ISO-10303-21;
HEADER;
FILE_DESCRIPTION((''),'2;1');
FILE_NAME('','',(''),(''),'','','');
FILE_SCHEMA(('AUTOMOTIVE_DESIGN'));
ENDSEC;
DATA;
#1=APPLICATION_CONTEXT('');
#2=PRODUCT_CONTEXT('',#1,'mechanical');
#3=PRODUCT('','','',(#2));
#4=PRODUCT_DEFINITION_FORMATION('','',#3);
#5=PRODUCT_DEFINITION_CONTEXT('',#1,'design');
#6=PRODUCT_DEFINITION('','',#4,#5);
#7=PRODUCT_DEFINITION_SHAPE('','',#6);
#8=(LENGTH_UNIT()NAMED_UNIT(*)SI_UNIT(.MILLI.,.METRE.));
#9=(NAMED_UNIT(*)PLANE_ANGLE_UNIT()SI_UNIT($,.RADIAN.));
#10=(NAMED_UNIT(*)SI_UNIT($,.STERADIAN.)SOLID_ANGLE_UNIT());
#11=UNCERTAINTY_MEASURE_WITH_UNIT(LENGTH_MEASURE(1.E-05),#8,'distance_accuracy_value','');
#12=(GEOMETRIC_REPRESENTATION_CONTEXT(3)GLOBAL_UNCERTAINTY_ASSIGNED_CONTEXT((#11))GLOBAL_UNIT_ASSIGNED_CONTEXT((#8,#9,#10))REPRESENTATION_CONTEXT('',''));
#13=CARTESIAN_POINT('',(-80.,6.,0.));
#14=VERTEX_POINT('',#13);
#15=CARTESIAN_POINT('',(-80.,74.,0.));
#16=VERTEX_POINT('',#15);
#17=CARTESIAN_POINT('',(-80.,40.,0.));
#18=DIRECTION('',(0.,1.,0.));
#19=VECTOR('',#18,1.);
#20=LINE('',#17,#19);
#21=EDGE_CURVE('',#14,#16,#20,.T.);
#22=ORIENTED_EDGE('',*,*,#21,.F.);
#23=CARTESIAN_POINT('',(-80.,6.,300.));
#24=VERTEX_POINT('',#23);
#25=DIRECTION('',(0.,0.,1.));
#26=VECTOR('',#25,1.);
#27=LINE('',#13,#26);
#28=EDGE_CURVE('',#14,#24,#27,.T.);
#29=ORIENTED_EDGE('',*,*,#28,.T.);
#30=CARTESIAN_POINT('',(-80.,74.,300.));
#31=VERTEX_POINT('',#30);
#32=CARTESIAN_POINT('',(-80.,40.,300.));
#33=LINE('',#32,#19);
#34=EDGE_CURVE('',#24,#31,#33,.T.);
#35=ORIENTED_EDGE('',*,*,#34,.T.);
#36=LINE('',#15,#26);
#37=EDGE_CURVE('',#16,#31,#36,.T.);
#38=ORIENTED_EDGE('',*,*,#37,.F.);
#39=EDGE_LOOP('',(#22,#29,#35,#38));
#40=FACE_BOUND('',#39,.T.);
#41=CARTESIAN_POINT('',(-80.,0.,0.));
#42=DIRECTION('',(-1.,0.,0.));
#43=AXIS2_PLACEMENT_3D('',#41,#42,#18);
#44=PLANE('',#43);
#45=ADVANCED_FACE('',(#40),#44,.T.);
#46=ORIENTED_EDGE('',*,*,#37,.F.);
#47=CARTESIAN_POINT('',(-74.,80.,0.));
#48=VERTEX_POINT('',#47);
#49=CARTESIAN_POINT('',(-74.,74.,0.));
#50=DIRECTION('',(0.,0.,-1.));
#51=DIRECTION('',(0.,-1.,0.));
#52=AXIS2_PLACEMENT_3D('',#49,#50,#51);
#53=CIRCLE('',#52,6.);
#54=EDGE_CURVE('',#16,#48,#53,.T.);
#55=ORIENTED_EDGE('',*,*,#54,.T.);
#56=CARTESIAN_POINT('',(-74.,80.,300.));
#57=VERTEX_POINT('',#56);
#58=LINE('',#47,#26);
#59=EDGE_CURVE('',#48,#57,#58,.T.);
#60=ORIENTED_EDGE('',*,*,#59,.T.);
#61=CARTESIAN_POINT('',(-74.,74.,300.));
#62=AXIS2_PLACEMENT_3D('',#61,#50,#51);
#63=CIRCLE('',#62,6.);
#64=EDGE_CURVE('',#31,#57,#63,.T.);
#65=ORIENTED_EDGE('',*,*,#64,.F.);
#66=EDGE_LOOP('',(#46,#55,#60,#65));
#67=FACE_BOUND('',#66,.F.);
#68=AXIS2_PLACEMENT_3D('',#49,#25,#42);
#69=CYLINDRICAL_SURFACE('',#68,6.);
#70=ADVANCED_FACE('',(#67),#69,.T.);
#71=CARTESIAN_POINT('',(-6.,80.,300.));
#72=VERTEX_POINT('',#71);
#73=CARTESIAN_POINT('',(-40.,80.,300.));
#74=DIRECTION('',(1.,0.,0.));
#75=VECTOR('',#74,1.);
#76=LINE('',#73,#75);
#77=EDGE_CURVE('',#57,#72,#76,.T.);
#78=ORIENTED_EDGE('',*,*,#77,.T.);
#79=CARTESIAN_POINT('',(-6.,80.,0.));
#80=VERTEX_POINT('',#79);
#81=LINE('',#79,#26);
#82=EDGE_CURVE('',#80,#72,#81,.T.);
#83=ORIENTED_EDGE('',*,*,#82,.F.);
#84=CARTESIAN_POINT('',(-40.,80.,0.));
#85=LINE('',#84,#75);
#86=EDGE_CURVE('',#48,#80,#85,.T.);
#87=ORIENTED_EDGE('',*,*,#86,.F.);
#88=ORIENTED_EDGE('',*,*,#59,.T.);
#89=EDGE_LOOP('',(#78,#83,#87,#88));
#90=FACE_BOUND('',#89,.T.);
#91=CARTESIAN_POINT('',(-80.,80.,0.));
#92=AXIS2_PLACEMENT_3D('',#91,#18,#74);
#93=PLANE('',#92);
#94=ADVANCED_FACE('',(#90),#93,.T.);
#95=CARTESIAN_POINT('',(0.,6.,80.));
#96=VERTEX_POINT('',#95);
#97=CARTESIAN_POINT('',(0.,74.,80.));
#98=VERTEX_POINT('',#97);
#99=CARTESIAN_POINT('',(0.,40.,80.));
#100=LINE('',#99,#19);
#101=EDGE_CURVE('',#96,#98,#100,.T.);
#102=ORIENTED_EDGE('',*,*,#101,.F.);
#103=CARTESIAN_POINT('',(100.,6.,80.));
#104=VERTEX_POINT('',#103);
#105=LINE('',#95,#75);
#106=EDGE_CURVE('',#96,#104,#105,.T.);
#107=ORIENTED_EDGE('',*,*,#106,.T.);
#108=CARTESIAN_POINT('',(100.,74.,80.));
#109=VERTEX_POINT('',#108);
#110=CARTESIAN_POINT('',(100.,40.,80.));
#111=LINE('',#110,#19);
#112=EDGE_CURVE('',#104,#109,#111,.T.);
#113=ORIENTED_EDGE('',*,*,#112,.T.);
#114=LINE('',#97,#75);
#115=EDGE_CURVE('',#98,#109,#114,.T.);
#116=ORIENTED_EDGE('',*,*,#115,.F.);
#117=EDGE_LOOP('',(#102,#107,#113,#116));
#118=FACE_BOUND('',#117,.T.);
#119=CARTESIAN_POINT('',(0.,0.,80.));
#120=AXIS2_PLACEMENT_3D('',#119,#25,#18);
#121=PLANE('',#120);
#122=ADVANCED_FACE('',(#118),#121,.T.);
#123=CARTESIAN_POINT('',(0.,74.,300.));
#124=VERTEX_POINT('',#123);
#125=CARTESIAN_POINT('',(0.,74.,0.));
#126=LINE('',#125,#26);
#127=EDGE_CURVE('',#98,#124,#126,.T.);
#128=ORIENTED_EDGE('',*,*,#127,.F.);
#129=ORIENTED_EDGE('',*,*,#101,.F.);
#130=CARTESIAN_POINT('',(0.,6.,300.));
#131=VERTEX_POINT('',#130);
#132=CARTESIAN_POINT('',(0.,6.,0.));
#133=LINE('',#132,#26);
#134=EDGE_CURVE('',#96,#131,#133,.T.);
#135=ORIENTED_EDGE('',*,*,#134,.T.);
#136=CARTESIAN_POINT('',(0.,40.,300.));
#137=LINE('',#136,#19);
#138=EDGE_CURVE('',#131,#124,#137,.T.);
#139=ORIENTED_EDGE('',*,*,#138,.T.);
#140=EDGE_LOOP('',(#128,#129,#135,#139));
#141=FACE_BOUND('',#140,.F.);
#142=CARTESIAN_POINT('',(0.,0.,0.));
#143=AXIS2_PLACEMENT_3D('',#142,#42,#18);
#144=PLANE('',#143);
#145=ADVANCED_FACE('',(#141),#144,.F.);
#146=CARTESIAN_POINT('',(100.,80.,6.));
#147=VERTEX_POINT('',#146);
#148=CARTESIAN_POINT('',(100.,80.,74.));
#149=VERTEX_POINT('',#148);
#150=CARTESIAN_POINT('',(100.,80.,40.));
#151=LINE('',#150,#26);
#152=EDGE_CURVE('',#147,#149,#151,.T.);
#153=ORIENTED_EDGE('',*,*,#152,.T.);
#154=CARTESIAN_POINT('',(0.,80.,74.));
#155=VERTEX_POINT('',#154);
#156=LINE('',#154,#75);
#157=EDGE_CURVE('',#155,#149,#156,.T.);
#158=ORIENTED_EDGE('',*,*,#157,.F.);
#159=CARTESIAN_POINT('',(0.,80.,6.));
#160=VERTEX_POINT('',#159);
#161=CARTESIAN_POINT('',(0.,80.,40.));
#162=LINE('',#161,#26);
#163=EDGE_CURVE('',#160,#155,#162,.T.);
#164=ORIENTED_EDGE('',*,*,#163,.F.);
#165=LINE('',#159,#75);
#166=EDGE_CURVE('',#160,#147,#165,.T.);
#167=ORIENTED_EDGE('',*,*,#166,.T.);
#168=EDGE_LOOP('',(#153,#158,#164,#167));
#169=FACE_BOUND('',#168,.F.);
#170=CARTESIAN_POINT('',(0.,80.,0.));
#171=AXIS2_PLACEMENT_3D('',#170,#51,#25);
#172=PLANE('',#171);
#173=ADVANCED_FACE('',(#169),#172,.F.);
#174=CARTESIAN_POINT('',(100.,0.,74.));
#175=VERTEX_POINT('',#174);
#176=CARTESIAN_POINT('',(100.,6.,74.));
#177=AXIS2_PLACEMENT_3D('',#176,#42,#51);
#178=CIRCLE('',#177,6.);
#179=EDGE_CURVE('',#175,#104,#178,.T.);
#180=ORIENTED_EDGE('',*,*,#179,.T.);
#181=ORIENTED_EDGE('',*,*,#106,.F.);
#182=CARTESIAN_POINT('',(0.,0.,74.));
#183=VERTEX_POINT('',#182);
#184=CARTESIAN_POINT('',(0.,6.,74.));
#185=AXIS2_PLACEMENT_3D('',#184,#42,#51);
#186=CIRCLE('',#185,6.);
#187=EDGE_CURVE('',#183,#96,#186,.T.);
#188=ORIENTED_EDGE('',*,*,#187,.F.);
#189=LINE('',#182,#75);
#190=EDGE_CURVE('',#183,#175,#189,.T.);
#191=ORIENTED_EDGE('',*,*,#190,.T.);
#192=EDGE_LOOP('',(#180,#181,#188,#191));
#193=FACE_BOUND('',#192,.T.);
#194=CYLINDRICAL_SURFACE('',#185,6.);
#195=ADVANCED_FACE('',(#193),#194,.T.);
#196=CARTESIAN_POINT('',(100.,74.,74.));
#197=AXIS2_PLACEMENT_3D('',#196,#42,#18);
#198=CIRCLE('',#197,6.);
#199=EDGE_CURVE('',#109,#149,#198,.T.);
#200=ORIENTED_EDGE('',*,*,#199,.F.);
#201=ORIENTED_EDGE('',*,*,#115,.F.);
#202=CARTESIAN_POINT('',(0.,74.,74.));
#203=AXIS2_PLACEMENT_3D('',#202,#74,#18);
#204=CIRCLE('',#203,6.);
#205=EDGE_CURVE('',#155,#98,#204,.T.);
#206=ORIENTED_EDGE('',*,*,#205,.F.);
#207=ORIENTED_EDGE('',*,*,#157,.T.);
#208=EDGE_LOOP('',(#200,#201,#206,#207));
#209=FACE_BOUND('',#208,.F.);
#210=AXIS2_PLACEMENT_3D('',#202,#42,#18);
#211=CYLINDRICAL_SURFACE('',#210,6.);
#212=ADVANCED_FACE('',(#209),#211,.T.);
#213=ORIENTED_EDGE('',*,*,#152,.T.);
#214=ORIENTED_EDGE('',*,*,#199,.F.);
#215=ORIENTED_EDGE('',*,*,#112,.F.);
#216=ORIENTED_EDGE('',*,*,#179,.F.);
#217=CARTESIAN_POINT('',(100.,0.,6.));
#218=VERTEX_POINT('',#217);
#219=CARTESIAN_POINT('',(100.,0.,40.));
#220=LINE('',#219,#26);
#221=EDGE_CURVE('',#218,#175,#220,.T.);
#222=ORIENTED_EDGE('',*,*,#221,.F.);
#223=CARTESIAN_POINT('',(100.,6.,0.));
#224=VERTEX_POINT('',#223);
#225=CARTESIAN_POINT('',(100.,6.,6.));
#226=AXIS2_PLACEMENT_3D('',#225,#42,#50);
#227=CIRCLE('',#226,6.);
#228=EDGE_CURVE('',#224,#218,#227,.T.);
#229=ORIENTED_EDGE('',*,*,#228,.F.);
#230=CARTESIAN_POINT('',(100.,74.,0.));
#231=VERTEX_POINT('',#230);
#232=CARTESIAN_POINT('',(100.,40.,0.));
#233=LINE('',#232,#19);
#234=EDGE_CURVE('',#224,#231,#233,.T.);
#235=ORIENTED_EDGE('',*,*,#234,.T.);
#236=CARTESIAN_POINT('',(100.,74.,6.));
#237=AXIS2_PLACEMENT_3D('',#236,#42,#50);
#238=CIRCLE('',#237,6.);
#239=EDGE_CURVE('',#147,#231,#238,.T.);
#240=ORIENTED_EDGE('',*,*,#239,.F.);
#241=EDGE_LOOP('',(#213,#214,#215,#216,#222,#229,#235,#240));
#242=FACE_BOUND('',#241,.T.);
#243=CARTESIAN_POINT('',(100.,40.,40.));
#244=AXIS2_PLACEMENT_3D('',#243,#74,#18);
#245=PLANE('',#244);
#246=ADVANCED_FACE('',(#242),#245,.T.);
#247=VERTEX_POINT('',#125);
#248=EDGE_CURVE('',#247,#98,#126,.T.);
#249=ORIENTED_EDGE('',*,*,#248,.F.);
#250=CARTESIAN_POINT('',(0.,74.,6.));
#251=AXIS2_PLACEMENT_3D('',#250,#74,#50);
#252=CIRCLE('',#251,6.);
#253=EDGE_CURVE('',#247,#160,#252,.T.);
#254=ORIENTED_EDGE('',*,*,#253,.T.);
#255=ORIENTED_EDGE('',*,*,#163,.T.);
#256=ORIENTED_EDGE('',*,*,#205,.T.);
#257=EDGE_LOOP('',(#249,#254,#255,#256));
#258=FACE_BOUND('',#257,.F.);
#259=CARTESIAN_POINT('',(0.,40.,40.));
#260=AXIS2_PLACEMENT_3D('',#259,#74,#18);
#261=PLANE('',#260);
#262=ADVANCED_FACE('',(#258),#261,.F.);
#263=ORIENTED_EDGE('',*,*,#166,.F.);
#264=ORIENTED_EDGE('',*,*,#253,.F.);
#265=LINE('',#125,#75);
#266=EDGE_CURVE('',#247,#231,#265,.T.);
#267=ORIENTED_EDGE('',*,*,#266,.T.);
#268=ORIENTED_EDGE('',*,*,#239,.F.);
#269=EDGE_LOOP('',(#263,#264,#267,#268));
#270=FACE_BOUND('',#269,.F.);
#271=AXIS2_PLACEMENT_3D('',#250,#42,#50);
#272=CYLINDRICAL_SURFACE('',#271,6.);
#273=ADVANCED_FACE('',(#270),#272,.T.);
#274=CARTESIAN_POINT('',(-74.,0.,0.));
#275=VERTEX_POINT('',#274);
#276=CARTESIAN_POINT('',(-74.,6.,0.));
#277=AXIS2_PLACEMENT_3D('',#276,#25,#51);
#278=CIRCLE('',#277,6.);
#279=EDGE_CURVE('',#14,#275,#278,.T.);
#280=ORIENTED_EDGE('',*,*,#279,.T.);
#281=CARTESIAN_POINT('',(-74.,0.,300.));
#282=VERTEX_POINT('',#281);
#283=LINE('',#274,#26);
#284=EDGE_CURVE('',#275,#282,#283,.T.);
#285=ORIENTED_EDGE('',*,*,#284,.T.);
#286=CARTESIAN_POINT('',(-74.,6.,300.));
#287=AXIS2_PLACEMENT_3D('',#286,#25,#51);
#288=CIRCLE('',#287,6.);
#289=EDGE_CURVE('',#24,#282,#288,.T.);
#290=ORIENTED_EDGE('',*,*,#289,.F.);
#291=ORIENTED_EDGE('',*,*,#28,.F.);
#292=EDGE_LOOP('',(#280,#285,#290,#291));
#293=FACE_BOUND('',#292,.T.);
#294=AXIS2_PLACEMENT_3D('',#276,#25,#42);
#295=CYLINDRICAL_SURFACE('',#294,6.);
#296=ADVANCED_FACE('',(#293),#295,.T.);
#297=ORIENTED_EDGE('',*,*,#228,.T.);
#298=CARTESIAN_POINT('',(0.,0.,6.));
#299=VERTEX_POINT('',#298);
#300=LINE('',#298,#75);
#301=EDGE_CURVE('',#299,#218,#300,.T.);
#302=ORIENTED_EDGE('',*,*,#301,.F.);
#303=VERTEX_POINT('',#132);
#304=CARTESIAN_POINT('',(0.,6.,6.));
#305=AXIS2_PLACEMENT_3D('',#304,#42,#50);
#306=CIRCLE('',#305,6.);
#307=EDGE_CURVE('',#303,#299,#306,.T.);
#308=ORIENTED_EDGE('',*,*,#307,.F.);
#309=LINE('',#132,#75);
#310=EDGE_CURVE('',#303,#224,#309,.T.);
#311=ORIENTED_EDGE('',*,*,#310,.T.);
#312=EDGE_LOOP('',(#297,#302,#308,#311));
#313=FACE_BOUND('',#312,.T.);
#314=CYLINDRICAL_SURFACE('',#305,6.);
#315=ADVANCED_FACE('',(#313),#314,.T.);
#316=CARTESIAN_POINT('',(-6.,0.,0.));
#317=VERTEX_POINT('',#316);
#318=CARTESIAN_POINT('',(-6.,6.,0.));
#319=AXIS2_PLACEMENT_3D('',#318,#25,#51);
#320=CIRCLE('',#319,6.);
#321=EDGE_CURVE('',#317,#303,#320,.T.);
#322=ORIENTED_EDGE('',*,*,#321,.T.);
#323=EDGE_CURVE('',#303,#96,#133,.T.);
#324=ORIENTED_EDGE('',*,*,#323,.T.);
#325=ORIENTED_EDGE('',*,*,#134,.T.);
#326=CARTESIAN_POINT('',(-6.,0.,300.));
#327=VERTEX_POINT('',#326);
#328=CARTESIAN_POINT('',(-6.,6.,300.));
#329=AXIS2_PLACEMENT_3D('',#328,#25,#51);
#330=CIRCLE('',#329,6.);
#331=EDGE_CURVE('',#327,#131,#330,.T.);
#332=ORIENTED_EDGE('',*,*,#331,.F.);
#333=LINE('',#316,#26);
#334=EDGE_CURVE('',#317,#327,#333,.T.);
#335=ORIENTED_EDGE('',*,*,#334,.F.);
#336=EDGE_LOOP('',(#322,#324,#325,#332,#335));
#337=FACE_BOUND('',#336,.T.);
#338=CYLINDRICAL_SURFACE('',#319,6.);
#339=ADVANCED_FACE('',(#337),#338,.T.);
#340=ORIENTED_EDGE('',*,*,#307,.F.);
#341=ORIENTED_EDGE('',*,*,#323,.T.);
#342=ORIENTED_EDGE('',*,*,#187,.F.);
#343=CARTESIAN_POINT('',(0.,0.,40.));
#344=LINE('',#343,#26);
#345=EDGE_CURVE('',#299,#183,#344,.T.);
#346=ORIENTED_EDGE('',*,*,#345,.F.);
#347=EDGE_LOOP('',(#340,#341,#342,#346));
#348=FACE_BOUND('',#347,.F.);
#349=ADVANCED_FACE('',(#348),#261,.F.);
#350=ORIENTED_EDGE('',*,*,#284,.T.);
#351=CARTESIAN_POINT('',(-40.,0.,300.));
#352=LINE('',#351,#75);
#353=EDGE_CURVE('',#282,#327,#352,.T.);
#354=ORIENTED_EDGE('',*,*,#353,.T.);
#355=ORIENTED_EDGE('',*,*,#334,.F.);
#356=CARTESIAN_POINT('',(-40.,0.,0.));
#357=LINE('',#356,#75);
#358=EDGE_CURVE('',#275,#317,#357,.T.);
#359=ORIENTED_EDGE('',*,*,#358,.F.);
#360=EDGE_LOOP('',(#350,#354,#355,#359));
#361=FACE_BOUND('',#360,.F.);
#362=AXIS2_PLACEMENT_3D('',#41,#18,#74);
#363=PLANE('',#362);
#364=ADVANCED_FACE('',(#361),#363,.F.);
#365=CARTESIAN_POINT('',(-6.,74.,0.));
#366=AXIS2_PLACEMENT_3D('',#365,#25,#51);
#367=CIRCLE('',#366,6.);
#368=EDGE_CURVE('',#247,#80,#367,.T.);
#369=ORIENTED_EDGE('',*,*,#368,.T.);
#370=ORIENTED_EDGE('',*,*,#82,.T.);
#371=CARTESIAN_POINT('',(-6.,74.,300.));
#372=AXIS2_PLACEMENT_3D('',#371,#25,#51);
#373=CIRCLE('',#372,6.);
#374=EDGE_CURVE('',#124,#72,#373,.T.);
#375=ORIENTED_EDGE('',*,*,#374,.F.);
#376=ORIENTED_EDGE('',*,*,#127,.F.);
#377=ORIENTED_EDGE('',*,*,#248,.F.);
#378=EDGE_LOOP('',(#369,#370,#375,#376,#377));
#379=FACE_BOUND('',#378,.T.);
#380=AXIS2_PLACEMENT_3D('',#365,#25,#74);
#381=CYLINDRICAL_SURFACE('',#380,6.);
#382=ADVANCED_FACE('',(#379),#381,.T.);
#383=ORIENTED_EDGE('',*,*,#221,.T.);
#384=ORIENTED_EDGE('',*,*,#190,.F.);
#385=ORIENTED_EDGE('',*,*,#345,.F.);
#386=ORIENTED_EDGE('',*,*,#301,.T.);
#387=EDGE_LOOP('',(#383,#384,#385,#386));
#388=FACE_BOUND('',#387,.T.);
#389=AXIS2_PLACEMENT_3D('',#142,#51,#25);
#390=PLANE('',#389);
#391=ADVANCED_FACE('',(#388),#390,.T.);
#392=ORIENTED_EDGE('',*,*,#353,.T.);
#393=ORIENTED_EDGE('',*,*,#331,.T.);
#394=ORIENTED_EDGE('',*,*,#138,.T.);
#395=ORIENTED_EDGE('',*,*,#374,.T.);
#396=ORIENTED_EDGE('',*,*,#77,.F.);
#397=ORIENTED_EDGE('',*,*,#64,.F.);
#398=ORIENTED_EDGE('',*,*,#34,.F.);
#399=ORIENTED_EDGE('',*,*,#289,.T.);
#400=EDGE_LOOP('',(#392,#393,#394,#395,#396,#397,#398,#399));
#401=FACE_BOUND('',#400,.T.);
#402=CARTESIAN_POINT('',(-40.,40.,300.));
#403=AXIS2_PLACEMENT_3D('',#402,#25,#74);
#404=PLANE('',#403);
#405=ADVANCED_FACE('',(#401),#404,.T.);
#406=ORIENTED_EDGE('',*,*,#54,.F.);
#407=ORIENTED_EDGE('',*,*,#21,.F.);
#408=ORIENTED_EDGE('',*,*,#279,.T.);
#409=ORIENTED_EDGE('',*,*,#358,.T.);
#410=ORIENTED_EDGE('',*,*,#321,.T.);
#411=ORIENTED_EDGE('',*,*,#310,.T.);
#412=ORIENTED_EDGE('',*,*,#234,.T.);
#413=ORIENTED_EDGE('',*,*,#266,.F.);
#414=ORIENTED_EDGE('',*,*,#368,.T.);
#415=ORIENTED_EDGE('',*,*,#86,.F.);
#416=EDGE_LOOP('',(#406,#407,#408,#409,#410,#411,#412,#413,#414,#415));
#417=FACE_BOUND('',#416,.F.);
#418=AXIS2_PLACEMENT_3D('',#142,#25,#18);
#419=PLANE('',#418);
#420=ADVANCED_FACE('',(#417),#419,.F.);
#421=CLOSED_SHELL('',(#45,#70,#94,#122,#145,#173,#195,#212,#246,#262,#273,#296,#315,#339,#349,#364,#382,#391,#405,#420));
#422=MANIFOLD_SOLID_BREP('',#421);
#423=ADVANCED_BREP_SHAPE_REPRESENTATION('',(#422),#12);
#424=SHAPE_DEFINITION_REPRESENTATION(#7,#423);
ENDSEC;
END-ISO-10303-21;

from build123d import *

# Parameters (mm, degrees)
F0_W        = 80
F0_H        = 80
F1_DEPTH    = 300
F2_R        = 6
F3_W        = 80
F3_H        = 80
F4_DEPTH    = 100
F5_T1_DEPTH = 115


# Not quite as in the source:
# - a fillet or chamfer that OpenCascade refuses, or shapes differently, is made with other operations: its cross-section is extruded or revolved along the edge and cut away or added


with BuildPart() as f1:
    # F0 (on Top) → F1 (new body)
    with BuildSketch(Plane.XY):
        with Locations((-40, 40)):
            Rectangle(F0_W, F0_H)
    extrude(amount=F1_DEPTH)

    # F2
    f2_edges = [f1.edges().sort_by_distance(p)[0] for p in [
        (-80, 80, 150),
        (-80, 0, 150),
        (0, 0, 150),
        (0, 80, 150),
    ]]
    fillet(f2_edges, radius=F2_R)

    # F3 (on Right) → F4 (join)
    with BuildSketch(Plane.YZ):
        with Locations((40, 40)):
            Rectangle(F3_W, F3_H)
    extrude(amount=F4_DEPTH)

    # F5: fillet of radius 6 on 4 edges, made by hand

    # F5_s2 → F5_t1 (cut)
    with BuildSketch(Plane.YZ):
        with BuildLine():
            ThreePointArc((0, 74), (1.7573593129, 78.2426406871), (6, 80))
            Line((6, 80), (0, 80))
            Line((0, 80), (0, 74))
        make_face()
        with BuildLine():
            ThreePointArc((80, 74), (78.2426406871, 78.2426406871), (74, 80))
            Line((74, 80), (80, 80))
            Line((80, 80), (80, 74))
        make_face()
        with BuildLine():
            ThreePointArc((6, 0), (1.7573593129, 1.7573593129), (0, 6))
            Line((0, 6), (0, 0))
            Line((0, 0), (6, 0))
        make_face()
        with BuildLine():
            ThreePointArc((74, 0), (78.2426406871, 1.7573593129), (80, 6))
            Line((80, 6), (80, 0))
            Line((80, 0), (74, 0))
        make_face()
    extrude(amount=F5_T1_DEPTH, mode=Mode.SUBTRACT)


solid = f1.part
